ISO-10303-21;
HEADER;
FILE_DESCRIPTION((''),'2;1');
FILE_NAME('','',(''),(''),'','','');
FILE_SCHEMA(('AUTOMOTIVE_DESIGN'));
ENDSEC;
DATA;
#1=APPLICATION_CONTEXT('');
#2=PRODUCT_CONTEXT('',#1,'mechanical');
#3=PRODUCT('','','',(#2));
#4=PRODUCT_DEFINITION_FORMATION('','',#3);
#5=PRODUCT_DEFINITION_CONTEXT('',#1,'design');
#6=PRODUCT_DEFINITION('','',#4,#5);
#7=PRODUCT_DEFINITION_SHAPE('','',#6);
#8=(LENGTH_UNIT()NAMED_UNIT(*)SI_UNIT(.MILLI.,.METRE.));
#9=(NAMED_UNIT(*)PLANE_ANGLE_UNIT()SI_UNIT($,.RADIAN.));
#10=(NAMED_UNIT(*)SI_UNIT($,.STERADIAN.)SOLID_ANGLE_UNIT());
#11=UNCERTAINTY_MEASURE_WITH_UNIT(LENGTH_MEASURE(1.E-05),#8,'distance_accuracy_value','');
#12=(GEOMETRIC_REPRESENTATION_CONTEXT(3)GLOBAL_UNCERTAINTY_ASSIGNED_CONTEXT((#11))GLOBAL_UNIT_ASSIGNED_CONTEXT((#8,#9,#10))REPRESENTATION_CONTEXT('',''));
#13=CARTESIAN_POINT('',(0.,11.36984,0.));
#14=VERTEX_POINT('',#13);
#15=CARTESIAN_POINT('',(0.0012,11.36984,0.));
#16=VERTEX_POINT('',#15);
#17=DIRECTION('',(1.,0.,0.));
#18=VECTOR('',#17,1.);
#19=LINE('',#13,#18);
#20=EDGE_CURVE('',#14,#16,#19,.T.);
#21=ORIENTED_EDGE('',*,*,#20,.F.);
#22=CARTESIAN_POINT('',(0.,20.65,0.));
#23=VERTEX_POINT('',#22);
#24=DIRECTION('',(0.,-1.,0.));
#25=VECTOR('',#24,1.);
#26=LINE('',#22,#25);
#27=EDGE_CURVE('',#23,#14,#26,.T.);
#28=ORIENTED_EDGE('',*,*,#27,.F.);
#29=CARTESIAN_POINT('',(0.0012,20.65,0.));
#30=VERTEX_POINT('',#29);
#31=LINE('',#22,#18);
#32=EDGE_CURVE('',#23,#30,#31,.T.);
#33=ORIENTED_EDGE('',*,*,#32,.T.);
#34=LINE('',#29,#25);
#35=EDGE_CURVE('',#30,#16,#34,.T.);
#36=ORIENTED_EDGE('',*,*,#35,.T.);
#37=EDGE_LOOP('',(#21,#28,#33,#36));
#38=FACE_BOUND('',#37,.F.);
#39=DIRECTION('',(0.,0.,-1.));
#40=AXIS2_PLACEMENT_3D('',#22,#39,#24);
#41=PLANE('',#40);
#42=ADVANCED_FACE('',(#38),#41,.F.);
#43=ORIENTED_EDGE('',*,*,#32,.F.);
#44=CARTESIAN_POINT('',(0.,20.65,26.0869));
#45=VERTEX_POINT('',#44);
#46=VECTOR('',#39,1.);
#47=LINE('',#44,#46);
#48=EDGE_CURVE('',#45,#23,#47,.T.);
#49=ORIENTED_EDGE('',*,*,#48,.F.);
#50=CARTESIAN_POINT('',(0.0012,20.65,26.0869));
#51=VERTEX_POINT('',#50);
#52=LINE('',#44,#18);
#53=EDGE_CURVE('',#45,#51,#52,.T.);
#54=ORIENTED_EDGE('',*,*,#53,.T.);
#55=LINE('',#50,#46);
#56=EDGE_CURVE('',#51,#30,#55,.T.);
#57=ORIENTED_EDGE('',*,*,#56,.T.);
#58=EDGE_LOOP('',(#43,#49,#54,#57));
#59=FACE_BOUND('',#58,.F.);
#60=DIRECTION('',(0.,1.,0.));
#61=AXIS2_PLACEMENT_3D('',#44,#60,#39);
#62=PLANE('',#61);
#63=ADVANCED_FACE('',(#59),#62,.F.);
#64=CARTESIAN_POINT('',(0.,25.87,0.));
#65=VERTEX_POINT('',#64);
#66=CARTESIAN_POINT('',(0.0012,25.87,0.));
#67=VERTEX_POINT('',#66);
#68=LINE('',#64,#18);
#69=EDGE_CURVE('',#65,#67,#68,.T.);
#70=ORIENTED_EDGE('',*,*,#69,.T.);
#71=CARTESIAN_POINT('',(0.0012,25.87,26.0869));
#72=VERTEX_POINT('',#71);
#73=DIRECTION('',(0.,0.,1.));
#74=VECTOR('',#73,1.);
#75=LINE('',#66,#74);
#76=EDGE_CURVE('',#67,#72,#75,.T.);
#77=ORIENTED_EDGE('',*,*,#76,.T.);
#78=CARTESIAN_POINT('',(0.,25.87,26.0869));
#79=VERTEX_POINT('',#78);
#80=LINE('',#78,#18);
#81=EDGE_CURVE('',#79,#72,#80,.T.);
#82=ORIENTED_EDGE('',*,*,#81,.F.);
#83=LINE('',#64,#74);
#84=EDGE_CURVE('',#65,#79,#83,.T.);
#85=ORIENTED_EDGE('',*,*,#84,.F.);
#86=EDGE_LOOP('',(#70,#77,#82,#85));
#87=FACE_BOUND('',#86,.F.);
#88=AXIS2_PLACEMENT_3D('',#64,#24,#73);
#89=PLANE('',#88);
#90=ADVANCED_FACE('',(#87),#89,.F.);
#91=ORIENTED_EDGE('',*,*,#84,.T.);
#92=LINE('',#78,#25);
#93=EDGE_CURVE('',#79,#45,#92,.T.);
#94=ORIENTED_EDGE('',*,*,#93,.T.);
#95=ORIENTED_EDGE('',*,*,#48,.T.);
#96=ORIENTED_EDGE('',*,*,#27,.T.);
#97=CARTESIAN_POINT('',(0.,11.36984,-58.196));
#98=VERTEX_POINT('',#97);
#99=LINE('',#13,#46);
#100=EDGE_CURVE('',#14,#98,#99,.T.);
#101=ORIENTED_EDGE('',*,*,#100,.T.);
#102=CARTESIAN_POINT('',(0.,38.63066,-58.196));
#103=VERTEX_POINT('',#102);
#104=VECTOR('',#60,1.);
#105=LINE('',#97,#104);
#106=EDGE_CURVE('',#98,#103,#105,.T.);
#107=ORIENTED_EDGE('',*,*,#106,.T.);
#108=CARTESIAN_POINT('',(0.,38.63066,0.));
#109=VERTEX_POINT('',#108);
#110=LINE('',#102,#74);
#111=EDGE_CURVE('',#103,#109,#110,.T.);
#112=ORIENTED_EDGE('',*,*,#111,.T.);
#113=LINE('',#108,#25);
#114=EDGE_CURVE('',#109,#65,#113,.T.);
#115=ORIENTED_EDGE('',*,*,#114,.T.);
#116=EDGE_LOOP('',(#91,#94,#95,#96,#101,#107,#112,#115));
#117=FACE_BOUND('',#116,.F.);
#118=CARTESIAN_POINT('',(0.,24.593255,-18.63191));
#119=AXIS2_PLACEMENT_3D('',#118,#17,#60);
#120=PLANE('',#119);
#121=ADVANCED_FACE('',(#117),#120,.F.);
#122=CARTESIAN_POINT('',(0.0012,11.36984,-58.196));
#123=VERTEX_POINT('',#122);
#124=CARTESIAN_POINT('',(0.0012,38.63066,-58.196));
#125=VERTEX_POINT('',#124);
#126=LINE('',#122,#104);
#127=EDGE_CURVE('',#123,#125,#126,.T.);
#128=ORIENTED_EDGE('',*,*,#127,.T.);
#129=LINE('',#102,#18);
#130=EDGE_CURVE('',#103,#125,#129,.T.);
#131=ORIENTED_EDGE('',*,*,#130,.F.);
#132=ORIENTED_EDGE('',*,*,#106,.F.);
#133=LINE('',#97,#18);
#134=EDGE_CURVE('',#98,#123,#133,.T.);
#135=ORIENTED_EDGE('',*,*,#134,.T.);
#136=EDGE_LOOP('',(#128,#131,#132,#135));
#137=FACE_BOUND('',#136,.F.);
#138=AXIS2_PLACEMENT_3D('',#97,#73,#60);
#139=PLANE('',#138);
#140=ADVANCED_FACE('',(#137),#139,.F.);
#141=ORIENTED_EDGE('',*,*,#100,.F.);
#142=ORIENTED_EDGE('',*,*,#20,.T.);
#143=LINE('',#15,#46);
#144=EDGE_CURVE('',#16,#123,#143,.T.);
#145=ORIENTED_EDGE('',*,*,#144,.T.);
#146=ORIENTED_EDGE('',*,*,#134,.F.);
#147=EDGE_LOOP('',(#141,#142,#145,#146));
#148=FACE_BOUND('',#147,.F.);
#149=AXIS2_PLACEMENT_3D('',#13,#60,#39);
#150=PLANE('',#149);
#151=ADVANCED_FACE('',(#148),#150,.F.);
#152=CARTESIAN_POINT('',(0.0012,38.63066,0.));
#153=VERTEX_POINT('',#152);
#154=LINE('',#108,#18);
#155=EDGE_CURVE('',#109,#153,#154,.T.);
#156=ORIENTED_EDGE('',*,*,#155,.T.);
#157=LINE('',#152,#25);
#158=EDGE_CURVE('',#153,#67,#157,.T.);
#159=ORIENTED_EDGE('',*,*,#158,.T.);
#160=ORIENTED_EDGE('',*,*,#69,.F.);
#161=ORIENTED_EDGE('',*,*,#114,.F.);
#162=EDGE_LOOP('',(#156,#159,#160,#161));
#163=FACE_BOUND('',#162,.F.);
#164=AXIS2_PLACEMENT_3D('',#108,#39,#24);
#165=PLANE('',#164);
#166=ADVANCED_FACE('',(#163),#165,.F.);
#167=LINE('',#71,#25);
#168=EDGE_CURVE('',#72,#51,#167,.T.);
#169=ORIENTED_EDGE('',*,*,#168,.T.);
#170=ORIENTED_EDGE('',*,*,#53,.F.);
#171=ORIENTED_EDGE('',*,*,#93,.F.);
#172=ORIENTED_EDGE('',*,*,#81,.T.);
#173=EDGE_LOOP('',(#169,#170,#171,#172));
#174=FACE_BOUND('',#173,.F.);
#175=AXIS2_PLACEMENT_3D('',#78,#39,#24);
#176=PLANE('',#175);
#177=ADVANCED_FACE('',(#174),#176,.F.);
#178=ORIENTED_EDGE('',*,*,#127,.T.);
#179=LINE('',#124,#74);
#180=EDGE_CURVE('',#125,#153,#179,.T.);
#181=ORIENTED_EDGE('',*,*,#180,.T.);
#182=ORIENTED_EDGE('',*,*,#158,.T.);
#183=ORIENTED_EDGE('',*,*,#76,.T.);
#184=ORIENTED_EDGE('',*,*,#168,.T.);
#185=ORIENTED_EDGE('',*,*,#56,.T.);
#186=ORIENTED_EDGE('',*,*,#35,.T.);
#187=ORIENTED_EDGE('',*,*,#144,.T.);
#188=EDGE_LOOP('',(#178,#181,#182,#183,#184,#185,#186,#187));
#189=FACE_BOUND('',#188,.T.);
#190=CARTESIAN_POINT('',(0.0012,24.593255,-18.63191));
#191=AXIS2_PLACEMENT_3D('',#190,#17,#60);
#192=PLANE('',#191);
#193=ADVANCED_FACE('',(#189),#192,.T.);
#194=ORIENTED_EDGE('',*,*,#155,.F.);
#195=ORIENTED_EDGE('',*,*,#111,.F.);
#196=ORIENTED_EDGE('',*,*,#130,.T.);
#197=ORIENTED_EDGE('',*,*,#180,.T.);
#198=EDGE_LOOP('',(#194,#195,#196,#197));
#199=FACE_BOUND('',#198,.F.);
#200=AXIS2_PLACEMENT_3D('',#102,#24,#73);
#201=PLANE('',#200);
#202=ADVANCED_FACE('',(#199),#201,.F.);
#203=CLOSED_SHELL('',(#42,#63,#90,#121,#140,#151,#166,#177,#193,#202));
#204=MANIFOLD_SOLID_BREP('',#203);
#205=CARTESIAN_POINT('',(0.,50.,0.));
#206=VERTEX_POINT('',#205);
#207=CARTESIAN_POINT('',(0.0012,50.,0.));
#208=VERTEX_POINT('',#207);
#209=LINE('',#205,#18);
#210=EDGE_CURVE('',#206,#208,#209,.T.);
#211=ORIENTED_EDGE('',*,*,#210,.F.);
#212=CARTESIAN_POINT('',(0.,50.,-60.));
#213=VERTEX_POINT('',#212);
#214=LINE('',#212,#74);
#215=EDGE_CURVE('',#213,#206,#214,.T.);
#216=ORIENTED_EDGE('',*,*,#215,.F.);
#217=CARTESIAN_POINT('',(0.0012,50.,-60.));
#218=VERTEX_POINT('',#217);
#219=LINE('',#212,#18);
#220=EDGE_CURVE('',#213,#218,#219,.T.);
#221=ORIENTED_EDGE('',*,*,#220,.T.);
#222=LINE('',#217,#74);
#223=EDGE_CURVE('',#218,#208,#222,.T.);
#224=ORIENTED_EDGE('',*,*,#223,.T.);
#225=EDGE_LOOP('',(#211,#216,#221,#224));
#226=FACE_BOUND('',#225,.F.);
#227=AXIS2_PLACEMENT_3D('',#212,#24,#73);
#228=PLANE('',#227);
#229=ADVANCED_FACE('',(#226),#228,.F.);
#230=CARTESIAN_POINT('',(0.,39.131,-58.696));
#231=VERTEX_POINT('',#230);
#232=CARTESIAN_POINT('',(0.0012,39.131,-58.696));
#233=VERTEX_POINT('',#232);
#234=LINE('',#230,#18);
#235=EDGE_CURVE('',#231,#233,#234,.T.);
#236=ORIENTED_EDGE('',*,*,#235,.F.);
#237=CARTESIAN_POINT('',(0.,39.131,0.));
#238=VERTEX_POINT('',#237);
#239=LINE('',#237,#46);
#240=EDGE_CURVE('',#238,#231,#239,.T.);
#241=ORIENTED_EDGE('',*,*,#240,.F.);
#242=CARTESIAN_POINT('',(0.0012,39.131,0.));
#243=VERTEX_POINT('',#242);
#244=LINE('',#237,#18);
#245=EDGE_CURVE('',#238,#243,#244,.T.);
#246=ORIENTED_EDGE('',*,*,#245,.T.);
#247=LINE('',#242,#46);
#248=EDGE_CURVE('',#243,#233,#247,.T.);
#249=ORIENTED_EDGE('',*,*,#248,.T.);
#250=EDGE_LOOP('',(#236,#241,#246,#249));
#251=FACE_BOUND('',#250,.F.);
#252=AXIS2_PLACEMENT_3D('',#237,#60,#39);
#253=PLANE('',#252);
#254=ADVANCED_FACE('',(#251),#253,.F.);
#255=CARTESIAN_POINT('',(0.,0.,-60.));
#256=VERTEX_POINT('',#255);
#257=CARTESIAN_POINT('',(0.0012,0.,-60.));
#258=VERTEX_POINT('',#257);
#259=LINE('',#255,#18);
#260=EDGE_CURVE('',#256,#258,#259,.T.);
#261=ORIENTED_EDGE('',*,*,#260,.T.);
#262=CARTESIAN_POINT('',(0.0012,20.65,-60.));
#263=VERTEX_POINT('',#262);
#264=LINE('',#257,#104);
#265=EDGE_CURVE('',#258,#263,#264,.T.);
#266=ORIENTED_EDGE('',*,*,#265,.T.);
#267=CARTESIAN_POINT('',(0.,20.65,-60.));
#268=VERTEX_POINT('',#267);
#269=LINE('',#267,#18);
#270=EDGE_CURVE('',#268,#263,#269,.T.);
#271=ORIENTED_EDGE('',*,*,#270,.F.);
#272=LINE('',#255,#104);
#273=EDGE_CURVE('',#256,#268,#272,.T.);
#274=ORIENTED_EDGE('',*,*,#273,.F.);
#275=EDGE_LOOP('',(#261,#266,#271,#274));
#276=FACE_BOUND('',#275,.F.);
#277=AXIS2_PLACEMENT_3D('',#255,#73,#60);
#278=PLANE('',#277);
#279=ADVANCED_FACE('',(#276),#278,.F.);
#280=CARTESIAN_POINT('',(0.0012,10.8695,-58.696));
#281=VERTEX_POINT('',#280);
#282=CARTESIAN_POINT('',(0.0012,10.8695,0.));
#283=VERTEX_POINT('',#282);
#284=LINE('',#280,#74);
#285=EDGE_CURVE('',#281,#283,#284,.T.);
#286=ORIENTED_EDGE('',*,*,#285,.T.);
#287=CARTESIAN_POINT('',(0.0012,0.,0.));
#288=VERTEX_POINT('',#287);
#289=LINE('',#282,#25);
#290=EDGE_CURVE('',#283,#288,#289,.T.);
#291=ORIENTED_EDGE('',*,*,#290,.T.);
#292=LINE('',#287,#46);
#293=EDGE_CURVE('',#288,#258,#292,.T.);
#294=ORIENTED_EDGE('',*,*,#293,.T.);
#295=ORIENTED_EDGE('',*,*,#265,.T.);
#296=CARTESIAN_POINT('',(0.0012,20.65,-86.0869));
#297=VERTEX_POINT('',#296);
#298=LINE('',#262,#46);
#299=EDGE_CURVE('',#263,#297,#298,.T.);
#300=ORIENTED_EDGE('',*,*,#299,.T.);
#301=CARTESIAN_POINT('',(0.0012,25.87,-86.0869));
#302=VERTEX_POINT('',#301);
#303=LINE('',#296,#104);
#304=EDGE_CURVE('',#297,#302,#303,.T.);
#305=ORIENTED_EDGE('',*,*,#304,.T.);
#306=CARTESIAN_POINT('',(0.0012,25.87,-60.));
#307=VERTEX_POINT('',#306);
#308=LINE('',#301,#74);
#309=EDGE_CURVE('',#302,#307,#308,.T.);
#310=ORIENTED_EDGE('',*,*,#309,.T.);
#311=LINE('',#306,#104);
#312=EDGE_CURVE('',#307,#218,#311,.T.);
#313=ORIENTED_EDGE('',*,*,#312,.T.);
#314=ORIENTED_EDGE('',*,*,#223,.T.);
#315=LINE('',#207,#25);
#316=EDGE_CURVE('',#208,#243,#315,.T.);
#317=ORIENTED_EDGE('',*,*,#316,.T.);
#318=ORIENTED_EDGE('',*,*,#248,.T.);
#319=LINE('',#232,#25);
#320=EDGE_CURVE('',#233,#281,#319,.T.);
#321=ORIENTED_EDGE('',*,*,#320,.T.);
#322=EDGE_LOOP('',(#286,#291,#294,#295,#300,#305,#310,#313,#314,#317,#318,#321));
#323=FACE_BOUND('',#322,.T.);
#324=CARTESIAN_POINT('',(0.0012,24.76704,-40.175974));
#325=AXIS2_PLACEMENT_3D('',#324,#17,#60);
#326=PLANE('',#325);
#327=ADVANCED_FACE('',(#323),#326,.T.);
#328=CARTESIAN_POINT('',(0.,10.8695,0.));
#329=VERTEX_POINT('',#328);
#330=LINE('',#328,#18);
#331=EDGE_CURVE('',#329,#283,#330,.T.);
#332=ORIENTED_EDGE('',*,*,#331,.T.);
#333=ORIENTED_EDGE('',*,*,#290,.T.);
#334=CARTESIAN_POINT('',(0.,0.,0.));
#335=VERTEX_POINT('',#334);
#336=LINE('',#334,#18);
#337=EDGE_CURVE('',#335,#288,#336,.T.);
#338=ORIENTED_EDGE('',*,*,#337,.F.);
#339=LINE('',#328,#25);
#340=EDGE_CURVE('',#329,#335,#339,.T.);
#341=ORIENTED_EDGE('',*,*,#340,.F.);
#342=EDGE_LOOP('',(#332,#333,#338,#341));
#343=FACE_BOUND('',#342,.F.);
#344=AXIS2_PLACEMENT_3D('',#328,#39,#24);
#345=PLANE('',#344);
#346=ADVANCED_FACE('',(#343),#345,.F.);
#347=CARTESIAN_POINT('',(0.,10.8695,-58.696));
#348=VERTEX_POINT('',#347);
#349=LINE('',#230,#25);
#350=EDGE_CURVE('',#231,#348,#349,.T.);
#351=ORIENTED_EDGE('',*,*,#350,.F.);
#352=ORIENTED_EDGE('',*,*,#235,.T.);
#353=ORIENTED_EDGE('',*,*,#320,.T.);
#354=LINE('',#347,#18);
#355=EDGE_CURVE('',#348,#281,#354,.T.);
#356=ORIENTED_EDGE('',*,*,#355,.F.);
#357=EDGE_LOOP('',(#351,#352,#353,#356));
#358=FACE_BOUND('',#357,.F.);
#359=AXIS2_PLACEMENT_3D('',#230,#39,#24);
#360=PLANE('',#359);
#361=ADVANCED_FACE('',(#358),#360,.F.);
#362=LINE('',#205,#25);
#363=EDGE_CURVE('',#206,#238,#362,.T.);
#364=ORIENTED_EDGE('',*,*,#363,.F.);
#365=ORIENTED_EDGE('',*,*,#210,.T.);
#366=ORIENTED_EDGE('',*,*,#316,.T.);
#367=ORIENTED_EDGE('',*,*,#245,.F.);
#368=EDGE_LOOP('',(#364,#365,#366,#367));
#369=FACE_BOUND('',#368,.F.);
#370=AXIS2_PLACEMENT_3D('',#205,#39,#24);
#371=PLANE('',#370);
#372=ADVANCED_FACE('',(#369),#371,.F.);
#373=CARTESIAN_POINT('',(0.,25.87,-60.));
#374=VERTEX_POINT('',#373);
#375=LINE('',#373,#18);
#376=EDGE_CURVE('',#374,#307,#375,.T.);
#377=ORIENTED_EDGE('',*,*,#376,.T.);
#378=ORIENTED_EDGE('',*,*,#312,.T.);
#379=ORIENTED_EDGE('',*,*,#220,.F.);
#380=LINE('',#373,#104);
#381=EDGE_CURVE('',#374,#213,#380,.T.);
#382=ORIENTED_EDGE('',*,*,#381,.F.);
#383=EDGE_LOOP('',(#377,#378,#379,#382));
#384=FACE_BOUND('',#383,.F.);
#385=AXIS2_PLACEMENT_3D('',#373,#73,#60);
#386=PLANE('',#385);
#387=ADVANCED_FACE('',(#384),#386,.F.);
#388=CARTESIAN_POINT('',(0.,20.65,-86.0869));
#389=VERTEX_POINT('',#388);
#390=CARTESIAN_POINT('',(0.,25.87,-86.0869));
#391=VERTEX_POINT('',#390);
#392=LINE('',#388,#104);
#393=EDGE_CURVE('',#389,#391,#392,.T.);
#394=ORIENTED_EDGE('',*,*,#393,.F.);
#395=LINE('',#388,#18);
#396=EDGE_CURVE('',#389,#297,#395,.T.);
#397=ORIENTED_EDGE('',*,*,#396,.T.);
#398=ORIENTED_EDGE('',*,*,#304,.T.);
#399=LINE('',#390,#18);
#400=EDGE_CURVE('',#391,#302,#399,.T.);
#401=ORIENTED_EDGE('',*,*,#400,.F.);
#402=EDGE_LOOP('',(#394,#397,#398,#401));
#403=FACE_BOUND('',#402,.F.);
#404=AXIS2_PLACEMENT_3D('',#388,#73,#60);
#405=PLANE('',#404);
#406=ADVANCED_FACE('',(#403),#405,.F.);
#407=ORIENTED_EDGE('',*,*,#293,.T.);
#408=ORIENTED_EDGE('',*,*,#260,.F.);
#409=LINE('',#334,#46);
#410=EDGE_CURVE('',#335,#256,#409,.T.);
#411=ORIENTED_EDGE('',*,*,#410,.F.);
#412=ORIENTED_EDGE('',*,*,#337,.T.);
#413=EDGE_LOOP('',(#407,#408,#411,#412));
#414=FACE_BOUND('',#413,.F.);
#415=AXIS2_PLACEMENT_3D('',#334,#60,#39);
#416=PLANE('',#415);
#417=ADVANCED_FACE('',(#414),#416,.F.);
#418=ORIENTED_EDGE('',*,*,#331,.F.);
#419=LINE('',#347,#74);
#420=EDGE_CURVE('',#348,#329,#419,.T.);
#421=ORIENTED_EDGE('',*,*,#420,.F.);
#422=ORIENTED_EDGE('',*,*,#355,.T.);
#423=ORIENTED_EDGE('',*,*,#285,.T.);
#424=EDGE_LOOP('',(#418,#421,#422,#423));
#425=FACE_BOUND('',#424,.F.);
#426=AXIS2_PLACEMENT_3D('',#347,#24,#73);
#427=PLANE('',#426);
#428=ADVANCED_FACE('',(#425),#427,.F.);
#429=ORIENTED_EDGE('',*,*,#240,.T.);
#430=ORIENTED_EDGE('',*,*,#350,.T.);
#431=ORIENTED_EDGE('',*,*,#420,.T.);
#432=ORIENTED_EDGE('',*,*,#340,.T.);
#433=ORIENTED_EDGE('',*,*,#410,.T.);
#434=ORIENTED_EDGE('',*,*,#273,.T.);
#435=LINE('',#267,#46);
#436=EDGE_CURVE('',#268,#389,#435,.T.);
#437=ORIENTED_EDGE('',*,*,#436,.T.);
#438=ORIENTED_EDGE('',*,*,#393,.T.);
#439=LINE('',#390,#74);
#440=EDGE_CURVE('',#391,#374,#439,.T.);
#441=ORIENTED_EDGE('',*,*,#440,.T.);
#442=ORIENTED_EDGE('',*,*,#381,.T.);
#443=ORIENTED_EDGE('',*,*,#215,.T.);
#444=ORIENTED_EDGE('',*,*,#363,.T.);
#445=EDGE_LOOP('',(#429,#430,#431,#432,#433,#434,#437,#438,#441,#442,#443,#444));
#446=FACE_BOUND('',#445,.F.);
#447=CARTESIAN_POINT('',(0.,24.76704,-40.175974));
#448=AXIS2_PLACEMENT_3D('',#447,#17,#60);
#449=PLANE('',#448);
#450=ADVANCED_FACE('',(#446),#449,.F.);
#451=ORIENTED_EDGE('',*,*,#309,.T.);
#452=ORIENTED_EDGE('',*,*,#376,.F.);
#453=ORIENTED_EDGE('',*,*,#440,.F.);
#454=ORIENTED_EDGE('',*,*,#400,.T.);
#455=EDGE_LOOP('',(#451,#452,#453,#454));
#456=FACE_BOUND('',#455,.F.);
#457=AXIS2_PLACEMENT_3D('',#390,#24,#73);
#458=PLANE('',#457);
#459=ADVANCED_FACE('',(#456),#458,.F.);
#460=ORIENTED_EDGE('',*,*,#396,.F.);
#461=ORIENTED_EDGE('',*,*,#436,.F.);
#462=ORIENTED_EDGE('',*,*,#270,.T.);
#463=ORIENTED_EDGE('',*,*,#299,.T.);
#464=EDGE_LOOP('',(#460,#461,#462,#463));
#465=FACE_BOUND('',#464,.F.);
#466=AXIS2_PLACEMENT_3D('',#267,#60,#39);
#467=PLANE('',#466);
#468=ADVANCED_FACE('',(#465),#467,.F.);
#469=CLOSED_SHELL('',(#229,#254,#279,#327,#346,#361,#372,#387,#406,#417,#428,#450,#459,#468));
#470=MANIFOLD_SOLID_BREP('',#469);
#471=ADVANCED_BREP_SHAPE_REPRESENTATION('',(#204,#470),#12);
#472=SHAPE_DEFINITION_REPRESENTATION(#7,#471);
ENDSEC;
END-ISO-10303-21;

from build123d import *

# Parameters (mm, degrees)
F1_DEPTH = 0.0012


# Not quite as in the source:
# - a feature names something its author has since deleted; it is built from what else it names


with BuildPart() as f1:
    # F0 (on Right) → F1 (new body)
    with BuildSketch(Plane.YZ):
        Polygon((6.5217, 0), (0, 0), (0, -60), (12, -60), (12.4011761725, -60), (20.65, -60), (20.65, -86.0869), (25.87, -86.0869), (25.87, -81.0653850647), (25.87, -60), (50, -60), (50, 0), (39.131, 0), (39.131, -27.64149), (39.131, -58.696), (10.8695, -58.696), (10.8695, -27.64149), (10.8695, 0), (9, 0), align=None)
    extrude(amount=F1_DEPTH)


with BuildPart() as f1b:
    # F0 (on Right) → F1, piece 2 (new body)
    with BuildSketch(Plane.YZ):
        Polygon((16.08474, 0), (11.4456, 0), (11.36984, 0), (11.36984, -26.73915), (11.36984, -27.14115), (11.36984, -58.196), (38.63066, -58.196), (38.63066, -27.14115), (38.63066, -26.73915), (38.63066, 0), (25.87, 0), (25.87, 26.0869), (20.65, 26.0869), (20.65, 0), align=None)
    extrude(amount=F1_DEPTH)


solid = Compound([f1.part, f1b.part])
